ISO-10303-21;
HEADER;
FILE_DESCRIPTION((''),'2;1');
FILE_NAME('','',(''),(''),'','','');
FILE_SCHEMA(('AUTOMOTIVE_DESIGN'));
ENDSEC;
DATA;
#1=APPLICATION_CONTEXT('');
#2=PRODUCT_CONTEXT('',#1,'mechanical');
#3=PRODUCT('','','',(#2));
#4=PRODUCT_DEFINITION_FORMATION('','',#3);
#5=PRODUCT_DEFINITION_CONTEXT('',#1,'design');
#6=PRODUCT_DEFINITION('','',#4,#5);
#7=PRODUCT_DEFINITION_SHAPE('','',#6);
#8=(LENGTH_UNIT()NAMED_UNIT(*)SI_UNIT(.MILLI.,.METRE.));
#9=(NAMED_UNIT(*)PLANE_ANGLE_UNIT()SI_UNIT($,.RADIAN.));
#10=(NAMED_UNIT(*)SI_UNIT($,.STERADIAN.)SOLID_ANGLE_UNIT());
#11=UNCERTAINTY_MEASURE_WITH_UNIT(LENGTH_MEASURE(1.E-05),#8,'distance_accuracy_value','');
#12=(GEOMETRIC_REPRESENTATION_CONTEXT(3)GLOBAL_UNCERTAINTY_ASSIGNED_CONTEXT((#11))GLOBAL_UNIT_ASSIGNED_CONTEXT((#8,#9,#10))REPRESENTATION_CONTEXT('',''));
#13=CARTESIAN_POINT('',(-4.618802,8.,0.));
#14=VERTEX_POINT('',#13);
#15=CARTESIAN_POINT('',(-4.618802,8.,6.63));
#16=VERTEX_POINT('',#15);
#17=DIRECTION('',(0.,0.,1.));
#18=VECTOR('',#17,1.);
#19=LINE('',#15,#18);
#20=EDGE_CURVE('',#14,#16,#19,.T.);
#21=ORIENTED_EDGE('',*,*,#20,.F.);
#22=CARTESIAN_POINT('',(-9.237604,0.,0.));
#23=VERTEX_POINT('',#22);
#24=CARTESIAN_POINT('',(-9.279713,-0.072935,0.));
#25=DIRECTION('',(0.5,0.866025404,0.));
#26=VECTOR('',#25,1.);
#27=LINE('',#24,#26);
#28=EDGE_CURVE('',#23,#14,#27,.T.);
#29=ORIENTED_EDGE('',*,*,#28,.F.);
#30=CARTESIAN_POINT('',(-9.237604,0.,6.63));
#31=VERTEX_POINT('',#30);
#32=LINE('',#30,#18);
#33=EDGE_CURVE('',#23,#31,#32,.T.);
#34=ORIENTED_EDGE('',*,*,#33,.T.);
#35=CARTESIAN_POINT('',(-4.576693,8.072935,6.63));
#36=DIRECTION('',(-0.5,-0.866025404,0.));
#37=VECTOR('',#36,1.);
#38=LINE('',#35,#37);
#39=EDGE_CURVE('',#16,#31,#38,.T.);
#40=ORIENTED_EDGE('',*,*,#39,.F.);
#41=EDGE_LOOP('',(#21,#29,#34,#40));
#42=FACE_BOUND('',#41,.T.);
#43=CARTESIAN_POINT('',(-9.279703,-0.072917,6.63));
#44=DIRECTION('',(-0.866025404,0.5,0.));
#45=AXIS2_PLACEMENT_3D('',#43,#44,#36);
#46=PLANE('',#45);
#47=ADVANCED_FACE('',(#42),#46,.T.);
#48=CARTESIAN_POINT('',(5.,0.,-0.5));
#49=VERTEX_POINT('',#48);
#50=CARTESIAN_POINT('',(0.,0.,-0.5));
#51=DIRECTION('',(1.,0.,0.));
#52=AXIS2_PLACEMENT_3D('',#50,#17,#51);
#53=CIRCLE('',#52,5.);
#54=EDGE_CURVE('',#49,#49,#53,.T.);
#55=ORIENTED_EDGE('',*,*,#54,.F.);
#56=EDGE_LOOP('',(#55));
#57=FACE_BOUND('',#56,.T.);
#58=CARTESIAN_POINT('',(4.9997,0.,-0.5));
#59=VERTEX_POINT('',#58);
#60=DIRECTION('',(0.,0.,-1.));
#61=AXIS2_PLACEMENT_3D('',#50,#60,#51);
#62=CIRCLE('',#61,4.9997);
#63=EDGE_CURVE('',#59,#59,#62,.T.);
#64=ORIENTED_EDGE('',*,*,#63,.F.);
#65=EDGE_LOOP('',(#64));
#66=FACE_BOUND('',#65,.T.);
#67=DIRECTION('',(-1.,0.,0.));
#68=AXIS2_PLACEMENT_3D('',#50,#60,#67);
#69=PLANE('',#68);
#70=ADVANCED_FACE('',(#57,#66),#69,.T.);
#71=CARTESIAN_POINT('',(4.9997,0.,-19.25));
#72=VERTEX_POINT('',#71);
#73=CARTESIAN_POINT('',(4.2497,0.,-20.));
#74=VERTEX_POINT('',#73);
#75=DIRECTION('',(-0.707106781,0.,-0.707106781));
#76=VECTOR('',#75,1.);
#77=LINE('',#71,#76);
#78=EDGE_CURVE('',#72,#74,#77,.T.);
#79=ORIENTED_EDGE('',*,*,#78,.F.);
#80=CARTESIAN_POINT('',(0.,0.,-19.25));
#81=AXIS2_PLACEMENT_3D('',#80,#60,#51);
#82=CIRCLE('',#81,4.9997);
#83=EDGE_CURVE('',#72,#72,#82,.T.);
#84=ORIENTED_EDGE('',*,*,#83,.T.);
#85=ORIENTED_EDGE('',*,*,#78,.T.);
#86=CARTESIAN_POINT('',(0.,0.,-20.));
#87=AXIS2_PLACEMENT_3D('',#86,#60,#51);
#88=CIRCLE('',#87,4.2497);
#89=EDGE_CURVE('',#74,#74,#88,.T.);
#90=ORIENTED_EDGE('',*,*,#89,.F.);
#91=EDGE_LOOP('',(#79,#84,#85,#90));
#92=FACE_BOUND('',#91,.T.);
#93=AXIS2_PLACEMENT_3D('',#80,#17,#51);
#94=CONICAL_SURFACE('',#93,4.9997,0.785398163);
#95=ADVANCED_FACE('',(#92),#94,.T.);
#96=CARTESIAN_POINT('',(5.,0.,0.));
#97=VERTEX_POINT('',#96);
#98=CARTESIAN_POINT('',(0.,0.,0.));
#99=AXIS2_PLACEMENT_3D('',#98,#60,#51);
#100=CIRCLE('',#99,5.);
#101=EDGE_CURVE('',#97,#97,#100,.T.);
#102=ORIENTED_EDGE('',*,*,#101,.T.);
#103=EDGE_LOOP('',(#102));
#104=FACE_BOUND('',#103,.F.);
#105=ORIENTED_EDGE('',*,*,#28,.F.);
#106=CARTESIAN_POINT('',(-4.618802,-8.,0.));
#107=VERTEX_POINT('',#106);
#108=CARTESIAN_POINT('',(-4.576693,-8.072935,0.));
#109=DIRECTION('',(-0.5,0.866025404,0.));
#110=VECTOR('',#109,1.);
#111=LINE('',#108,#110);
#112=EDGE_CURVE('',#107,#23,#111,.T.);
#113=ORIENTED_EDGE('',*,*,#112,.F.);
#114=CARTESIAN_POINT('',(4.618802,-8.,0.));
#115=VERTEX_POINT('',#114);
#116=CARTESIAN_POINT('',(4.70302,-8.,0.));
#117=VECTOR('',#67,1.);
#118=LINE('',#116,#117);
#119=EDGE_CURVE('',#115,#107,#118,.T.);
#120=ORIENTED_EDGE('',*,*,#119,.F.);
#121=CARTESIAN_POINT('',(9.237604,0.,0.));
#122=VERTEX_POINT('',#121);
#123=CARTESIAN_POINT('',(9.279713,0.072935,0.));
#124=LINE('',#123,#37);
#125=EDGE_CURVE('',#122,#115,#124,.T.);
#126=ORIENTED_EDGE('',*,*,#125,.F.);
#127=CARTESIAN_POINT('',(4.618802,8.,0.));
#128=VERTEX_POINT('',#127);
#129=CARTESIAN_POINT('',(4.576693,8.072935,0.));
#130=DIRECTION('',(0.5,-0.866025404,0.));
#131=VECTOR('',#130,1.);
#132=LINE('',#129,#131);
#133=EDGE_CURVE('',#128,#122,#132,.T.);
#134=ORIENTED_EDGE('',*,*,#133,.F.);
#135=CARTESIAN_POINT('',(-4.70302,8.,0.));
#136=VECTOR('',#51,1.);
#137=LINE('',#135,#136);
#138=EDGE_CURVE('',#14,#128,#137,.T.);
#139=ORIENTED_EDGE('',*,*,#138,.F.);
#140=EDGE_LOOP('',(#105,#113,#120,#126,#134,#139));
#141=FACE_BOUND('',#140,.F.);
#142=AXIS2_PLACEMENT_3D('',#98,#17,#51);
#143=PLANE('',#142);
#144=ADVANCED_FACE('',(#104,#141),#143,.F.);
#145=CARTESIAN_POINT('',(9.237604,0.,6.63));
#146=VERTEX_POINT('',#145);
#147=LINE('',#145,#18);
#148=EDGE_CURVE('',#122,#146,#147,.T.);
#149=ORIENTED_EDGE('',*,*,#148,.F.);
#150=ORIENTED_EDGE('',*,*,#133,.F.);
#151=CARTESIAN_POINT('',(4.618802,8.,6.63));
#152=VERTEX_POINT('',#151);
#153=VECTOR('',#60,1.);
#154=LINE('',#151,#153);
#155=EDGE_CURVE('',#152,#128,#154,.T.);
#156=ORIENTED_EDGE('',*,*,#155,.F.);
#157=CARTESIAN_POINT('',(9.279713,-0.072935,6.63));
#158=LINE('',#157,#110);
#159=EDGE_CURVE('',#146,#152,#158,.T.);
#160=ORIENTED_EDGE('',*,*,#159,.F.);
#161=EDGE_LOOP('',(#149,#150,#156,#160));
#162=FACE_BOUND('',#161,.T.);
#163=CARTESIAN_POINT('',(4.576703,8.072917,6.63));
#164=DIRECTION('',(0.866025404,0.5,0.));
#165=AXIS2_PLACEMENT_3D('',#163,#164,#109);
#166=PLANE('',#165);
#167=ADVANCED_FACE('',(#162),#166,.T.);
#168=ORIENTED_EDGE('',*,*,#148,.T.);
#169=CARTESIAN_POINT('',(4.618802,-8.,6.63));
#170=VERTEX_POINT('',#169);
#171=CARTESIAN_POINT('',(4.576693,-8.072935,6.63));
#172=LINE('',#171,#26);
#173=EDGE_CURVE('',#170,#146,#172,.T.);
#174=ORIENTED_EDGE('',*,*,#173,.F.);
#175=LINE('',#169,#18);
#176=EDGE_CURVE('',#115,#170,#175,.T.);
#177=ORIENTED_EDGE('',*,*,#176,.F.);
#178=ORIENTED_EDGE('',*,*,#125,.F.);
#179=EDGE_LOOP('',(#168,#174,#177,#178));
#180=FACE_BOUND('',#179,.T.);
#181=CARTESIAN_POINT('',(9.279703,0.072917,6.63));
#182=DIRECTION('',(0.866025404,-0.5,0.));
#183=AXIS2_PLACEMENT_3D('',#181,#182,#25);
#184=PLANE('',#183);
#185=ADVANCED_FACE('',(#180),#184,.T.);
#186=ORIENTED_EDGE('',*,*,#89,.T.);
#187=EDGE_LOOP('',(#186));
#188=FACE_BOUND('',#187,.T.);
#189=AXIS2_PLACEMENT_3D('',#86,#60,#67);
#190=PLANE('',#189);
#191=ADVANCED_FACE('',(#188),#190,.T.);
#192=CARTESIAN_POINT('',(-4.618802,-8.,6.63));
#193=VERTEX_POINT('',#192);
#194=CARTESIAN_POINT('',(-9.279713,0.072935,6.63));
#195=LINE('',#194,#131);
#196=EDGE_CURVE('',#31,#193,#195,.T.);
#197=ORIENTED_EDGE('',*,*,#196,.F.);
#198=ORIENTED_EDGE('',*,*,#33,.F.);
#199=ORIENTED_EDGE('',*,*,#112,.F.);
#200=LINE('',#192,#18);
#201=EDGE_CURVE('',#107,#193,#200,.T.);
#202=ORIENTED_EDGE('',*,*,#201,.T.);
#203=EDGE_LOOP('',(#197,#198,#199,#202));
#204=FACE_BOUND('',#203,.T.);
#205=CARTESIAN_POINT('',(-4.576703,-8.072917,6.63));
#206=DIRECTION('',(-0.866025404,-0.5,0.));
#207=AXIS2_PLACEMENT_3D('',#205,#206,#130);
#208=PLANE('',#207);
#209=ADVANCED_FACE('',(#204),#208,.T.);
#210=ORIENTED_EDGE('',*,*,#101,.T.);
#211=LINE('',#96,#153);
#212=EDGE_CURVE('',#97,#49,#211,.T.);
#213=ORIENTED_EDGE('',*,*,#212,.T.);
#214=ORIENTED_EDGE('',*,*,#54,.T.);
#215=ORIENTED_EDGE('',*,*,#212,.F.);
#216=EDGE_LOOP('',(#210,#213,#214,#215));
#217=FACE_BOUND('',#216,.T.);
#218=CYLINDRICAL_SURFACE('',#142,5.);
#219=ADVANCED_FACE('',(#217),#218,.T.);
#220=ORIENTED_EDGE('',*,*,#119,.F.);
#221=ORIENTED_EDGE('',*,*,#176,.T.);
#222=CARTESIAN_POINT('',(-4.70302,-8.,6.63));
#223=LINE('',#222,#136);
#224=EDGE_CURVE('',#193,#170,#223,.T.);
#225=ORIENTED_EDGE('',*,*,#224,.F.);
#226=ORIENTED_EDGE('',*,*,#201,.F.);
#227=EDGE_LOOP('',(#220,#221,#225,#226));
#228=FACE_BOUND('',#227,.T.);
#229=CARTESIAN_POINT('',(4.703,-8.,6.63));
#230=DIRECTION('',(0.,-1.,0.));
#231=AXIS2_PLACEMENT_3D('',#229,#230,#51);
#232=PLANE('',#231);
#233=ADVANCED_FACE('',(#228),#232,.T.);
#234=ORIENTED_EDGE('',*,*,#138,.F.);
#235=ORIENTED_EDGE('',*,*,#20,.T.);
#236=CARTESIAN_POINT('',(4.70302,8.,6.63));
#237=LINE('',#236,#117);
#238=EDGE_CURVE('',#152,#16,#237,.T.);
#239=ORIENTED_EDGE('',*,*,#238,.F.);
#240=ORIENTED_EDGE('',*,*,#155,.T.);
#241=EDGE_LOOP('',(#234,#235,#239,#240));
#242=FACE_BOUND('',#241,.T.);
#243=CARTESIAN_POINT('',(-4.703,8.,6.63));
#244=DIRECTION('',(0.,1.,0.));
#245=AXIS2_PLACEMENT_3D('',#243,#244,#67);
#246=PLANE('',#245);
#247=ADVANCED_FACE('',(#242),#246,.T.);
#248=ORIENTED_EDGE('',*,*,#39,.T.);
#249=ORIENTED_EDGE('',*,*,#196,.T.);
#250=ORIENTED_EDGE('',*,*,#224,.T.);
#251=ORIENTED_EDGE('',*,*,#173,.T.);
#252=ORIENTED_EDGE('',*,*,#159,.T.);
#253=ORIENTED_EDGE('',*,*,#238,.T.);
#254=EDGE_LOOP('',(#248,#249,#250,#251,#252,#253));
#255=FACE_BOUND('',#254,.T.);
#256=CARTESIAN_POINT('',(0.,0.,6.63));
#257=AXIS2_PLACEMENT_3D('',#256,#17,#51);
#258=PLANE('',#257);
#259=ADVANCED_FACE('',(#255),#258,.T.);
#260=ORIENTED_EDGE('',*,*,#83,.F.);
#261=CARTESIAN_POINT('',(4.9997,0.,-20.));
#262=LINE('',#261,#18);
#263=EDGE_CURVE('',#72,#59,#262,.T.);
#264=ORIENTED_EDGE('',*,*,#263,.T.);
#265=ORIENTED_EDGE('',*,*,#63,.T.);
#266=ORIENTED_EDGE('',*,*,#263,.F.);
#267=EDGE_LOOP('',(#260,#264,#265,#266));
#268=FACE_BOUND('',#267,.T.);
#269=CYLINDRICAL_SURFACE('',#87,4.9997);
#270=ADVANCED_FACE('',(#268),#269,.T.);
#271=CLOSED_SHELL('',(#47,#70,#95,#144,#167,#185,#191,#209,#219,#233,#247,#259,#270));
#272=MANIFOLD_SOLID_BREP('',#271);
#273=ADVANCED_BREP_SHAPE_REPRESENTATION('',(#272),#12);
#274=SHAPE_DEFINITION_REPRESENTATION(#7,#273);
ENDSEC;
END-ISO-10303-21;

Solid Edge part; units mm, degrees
sketch "Sketch1" plane through (0, 0, 0) normal (0, 0, 1) x (1, 0, 0)
  circle A0 centre (0, 0) radius 9.28
  dimension "D1" = 18.56
extrude "Protrusion1" add sketch "Sketch1" along normal blind 6.63
sketch "Sketch2" plane through (0, 0, 0) normal (0, 0, -1) x (1, 0, 0)
  circle A0 centre (0, 0) radius 5
extrude "Protrusion2" add sketch "Sketch2" along normal blind 20
sketch "Sketch3" plane through (0, 0, -20) normal (0, 0, -1) x (1, 0, 0)
  circle A0 centre (0, 0) radius 4.9997
extrude "Cutout1" cut sketch "Sketch3" against normal blind 19.5 flip side to cut
chamfer "Chamfer_1" distance 0.75 angle 45 1 edges at (-4.9997, 0, -20)
sketch "Sketch4" plane through (0, 0, 6.63) normal (0, 0, 1) x (1, 0, 0)
  line L0 (-4.703, 8) -> (4.703, 8)
  dimension "D1" = 16
extrude "Cutout2" cut sketch "Sketch4" against normal up to next material side at (0, 8.05, 6.63)
pattern_circular "Pattern1" count 6 over 360 about axis through (0, 0, 6.63) along (0, 0, 1) of "Cutout2"
properties part number "24104506"
